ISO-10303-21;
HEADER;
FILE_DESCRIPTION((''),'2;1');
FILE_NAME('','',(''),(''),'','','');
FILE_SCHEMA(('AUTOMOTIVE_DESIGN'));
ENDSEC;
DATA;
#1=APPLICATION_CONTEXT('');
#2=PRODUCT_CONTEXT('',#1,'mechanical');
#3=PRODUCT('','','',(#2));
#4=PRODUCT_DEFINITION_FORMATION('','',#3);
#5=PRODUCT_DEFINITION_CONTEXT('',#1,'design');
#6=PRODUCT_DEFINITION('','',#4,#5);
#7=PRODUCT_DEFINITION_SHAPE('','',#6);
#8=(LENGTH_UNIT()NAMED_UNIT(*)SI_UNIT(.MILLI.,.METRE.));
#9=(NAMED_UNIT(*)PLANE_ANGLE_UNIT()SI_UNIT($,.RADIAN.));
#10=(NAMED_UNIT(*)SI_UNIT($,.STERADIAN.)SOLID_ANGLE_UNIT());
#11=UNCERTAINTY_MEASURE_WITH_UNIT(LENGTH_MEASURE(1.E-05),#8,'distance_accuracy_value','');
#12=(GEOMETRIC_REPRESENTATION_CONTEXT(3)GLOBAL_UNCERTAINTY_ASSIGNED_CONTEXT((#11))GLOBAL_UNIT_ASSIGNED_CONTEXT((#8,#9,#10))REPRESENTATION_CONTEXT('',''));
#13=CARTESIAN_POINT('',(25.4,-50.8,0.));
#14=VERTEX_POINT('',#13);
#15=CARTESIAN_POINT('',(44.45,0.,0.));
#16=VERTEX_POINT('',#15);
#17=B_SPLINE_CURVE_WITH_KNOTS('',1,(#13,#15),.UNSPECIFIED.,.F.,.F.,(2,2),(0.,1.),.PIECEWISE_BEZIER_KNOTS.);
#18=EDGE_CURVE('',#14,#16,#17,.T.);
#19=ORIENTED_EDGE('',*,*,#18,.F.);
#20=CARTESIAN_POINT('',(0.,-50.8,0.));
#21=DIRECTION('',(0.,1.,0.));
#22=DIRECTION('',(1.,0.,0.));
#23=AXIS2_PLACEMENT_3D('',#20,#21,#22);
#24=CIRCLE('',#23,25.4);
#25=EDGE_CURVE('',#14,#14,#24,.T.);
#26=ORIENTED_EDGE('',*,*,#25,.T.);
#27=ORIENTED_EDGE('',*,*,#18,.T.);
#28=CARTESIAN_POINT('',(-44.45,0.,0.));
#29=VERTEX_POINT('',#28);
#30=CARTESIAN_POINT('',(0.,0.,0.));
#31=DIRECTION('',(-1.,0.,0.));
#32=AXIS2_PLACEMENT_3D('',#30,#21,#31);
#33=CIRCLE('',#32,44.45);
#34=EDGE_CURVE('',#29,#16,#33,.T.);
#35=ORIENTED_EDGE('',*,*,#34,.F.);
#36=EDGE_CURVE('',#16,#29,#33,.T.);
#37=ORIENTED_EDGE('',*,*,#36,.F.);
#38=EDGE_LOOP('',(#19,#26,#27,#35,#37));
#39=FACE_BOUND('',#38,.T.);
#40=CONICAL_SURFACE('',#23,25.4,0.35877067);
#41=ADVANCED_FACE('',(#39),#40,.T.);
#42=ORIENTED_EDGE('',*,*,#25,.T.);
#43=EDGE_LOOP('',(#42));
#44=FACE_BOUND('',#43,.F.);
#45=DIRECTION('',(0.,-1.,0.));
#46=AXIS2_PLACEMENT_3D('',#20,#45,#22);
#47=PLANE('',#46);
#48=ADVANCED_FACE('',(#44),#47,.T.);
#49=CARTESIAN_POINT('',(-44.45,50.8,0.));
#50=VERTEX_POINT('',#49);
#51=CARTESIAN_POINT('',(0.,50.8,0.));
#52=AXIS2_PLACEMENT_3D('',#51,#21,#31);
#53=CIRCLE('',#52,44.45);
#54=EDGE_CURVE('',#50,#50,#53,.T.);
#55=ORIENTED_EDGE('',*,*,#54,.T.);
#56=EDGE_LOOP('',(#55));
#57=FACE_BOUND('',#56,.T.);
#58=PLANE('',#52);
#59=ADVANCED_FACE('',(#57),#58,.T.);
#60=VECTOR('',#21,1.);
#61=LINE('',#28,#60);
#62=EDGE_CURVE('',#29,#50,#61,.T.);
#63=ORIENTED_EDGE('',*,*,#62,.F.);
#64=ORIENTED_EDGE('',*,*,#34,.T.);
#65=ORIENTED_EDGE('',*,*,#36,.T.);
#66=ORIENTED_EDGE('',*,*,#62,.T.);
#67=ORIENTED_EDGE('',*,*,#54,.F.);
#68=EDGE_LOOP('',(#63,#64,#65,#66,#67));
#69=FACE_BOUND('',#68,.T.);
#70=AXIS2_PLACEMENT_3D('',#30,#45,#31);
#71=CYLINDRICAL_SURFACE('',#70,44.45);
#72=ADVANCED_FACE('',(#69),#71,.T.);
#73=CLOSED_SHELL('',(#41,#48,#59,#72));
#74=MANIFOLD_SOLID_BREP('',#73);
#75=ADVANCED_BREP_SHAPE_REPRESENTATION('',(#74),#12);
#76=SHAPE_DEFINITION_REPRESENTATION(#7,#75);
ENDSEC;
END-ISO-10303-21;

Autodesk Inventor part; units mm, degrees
ref_plane "YZ Plane" through (0, 0, 0) normal (1, 0, 0) x (0, 1, 0)
ref_plane "XZ Plane" through (0, 0, 0) normal (0, 1, 0) x (-1, 0, 0)
ref_plane "XY Plane" through (0, 0, 0) normal (0, 0, 1) x (1, 0, 0)
sketch "Sketch1" plane through (0, 0, 0) normal (0, 1, 0) x (-1, 0, 0)
  circle A0 centre (0, 0) radius 44.45
  dimension "d0" = 88.9
extrude "Extrusion1" add sketch "Sketch1" along normal blind 50.8
sketch "Sketch2" plane through (0, 0, 0) normal (0, -1, 0) x (1, 0, 0)
  circle A0 centre (0, 0) radius 25.4
  dimension "d3" = 50.8
extrude "Extrusion2" add sketch "Sketch2" along normal blind 50.8
loft "Loft1" add section 1 edges at (-25.4, -50.8, 0) section 2 edges at (44.45, 0, 0)
properties part number "Thing2"
